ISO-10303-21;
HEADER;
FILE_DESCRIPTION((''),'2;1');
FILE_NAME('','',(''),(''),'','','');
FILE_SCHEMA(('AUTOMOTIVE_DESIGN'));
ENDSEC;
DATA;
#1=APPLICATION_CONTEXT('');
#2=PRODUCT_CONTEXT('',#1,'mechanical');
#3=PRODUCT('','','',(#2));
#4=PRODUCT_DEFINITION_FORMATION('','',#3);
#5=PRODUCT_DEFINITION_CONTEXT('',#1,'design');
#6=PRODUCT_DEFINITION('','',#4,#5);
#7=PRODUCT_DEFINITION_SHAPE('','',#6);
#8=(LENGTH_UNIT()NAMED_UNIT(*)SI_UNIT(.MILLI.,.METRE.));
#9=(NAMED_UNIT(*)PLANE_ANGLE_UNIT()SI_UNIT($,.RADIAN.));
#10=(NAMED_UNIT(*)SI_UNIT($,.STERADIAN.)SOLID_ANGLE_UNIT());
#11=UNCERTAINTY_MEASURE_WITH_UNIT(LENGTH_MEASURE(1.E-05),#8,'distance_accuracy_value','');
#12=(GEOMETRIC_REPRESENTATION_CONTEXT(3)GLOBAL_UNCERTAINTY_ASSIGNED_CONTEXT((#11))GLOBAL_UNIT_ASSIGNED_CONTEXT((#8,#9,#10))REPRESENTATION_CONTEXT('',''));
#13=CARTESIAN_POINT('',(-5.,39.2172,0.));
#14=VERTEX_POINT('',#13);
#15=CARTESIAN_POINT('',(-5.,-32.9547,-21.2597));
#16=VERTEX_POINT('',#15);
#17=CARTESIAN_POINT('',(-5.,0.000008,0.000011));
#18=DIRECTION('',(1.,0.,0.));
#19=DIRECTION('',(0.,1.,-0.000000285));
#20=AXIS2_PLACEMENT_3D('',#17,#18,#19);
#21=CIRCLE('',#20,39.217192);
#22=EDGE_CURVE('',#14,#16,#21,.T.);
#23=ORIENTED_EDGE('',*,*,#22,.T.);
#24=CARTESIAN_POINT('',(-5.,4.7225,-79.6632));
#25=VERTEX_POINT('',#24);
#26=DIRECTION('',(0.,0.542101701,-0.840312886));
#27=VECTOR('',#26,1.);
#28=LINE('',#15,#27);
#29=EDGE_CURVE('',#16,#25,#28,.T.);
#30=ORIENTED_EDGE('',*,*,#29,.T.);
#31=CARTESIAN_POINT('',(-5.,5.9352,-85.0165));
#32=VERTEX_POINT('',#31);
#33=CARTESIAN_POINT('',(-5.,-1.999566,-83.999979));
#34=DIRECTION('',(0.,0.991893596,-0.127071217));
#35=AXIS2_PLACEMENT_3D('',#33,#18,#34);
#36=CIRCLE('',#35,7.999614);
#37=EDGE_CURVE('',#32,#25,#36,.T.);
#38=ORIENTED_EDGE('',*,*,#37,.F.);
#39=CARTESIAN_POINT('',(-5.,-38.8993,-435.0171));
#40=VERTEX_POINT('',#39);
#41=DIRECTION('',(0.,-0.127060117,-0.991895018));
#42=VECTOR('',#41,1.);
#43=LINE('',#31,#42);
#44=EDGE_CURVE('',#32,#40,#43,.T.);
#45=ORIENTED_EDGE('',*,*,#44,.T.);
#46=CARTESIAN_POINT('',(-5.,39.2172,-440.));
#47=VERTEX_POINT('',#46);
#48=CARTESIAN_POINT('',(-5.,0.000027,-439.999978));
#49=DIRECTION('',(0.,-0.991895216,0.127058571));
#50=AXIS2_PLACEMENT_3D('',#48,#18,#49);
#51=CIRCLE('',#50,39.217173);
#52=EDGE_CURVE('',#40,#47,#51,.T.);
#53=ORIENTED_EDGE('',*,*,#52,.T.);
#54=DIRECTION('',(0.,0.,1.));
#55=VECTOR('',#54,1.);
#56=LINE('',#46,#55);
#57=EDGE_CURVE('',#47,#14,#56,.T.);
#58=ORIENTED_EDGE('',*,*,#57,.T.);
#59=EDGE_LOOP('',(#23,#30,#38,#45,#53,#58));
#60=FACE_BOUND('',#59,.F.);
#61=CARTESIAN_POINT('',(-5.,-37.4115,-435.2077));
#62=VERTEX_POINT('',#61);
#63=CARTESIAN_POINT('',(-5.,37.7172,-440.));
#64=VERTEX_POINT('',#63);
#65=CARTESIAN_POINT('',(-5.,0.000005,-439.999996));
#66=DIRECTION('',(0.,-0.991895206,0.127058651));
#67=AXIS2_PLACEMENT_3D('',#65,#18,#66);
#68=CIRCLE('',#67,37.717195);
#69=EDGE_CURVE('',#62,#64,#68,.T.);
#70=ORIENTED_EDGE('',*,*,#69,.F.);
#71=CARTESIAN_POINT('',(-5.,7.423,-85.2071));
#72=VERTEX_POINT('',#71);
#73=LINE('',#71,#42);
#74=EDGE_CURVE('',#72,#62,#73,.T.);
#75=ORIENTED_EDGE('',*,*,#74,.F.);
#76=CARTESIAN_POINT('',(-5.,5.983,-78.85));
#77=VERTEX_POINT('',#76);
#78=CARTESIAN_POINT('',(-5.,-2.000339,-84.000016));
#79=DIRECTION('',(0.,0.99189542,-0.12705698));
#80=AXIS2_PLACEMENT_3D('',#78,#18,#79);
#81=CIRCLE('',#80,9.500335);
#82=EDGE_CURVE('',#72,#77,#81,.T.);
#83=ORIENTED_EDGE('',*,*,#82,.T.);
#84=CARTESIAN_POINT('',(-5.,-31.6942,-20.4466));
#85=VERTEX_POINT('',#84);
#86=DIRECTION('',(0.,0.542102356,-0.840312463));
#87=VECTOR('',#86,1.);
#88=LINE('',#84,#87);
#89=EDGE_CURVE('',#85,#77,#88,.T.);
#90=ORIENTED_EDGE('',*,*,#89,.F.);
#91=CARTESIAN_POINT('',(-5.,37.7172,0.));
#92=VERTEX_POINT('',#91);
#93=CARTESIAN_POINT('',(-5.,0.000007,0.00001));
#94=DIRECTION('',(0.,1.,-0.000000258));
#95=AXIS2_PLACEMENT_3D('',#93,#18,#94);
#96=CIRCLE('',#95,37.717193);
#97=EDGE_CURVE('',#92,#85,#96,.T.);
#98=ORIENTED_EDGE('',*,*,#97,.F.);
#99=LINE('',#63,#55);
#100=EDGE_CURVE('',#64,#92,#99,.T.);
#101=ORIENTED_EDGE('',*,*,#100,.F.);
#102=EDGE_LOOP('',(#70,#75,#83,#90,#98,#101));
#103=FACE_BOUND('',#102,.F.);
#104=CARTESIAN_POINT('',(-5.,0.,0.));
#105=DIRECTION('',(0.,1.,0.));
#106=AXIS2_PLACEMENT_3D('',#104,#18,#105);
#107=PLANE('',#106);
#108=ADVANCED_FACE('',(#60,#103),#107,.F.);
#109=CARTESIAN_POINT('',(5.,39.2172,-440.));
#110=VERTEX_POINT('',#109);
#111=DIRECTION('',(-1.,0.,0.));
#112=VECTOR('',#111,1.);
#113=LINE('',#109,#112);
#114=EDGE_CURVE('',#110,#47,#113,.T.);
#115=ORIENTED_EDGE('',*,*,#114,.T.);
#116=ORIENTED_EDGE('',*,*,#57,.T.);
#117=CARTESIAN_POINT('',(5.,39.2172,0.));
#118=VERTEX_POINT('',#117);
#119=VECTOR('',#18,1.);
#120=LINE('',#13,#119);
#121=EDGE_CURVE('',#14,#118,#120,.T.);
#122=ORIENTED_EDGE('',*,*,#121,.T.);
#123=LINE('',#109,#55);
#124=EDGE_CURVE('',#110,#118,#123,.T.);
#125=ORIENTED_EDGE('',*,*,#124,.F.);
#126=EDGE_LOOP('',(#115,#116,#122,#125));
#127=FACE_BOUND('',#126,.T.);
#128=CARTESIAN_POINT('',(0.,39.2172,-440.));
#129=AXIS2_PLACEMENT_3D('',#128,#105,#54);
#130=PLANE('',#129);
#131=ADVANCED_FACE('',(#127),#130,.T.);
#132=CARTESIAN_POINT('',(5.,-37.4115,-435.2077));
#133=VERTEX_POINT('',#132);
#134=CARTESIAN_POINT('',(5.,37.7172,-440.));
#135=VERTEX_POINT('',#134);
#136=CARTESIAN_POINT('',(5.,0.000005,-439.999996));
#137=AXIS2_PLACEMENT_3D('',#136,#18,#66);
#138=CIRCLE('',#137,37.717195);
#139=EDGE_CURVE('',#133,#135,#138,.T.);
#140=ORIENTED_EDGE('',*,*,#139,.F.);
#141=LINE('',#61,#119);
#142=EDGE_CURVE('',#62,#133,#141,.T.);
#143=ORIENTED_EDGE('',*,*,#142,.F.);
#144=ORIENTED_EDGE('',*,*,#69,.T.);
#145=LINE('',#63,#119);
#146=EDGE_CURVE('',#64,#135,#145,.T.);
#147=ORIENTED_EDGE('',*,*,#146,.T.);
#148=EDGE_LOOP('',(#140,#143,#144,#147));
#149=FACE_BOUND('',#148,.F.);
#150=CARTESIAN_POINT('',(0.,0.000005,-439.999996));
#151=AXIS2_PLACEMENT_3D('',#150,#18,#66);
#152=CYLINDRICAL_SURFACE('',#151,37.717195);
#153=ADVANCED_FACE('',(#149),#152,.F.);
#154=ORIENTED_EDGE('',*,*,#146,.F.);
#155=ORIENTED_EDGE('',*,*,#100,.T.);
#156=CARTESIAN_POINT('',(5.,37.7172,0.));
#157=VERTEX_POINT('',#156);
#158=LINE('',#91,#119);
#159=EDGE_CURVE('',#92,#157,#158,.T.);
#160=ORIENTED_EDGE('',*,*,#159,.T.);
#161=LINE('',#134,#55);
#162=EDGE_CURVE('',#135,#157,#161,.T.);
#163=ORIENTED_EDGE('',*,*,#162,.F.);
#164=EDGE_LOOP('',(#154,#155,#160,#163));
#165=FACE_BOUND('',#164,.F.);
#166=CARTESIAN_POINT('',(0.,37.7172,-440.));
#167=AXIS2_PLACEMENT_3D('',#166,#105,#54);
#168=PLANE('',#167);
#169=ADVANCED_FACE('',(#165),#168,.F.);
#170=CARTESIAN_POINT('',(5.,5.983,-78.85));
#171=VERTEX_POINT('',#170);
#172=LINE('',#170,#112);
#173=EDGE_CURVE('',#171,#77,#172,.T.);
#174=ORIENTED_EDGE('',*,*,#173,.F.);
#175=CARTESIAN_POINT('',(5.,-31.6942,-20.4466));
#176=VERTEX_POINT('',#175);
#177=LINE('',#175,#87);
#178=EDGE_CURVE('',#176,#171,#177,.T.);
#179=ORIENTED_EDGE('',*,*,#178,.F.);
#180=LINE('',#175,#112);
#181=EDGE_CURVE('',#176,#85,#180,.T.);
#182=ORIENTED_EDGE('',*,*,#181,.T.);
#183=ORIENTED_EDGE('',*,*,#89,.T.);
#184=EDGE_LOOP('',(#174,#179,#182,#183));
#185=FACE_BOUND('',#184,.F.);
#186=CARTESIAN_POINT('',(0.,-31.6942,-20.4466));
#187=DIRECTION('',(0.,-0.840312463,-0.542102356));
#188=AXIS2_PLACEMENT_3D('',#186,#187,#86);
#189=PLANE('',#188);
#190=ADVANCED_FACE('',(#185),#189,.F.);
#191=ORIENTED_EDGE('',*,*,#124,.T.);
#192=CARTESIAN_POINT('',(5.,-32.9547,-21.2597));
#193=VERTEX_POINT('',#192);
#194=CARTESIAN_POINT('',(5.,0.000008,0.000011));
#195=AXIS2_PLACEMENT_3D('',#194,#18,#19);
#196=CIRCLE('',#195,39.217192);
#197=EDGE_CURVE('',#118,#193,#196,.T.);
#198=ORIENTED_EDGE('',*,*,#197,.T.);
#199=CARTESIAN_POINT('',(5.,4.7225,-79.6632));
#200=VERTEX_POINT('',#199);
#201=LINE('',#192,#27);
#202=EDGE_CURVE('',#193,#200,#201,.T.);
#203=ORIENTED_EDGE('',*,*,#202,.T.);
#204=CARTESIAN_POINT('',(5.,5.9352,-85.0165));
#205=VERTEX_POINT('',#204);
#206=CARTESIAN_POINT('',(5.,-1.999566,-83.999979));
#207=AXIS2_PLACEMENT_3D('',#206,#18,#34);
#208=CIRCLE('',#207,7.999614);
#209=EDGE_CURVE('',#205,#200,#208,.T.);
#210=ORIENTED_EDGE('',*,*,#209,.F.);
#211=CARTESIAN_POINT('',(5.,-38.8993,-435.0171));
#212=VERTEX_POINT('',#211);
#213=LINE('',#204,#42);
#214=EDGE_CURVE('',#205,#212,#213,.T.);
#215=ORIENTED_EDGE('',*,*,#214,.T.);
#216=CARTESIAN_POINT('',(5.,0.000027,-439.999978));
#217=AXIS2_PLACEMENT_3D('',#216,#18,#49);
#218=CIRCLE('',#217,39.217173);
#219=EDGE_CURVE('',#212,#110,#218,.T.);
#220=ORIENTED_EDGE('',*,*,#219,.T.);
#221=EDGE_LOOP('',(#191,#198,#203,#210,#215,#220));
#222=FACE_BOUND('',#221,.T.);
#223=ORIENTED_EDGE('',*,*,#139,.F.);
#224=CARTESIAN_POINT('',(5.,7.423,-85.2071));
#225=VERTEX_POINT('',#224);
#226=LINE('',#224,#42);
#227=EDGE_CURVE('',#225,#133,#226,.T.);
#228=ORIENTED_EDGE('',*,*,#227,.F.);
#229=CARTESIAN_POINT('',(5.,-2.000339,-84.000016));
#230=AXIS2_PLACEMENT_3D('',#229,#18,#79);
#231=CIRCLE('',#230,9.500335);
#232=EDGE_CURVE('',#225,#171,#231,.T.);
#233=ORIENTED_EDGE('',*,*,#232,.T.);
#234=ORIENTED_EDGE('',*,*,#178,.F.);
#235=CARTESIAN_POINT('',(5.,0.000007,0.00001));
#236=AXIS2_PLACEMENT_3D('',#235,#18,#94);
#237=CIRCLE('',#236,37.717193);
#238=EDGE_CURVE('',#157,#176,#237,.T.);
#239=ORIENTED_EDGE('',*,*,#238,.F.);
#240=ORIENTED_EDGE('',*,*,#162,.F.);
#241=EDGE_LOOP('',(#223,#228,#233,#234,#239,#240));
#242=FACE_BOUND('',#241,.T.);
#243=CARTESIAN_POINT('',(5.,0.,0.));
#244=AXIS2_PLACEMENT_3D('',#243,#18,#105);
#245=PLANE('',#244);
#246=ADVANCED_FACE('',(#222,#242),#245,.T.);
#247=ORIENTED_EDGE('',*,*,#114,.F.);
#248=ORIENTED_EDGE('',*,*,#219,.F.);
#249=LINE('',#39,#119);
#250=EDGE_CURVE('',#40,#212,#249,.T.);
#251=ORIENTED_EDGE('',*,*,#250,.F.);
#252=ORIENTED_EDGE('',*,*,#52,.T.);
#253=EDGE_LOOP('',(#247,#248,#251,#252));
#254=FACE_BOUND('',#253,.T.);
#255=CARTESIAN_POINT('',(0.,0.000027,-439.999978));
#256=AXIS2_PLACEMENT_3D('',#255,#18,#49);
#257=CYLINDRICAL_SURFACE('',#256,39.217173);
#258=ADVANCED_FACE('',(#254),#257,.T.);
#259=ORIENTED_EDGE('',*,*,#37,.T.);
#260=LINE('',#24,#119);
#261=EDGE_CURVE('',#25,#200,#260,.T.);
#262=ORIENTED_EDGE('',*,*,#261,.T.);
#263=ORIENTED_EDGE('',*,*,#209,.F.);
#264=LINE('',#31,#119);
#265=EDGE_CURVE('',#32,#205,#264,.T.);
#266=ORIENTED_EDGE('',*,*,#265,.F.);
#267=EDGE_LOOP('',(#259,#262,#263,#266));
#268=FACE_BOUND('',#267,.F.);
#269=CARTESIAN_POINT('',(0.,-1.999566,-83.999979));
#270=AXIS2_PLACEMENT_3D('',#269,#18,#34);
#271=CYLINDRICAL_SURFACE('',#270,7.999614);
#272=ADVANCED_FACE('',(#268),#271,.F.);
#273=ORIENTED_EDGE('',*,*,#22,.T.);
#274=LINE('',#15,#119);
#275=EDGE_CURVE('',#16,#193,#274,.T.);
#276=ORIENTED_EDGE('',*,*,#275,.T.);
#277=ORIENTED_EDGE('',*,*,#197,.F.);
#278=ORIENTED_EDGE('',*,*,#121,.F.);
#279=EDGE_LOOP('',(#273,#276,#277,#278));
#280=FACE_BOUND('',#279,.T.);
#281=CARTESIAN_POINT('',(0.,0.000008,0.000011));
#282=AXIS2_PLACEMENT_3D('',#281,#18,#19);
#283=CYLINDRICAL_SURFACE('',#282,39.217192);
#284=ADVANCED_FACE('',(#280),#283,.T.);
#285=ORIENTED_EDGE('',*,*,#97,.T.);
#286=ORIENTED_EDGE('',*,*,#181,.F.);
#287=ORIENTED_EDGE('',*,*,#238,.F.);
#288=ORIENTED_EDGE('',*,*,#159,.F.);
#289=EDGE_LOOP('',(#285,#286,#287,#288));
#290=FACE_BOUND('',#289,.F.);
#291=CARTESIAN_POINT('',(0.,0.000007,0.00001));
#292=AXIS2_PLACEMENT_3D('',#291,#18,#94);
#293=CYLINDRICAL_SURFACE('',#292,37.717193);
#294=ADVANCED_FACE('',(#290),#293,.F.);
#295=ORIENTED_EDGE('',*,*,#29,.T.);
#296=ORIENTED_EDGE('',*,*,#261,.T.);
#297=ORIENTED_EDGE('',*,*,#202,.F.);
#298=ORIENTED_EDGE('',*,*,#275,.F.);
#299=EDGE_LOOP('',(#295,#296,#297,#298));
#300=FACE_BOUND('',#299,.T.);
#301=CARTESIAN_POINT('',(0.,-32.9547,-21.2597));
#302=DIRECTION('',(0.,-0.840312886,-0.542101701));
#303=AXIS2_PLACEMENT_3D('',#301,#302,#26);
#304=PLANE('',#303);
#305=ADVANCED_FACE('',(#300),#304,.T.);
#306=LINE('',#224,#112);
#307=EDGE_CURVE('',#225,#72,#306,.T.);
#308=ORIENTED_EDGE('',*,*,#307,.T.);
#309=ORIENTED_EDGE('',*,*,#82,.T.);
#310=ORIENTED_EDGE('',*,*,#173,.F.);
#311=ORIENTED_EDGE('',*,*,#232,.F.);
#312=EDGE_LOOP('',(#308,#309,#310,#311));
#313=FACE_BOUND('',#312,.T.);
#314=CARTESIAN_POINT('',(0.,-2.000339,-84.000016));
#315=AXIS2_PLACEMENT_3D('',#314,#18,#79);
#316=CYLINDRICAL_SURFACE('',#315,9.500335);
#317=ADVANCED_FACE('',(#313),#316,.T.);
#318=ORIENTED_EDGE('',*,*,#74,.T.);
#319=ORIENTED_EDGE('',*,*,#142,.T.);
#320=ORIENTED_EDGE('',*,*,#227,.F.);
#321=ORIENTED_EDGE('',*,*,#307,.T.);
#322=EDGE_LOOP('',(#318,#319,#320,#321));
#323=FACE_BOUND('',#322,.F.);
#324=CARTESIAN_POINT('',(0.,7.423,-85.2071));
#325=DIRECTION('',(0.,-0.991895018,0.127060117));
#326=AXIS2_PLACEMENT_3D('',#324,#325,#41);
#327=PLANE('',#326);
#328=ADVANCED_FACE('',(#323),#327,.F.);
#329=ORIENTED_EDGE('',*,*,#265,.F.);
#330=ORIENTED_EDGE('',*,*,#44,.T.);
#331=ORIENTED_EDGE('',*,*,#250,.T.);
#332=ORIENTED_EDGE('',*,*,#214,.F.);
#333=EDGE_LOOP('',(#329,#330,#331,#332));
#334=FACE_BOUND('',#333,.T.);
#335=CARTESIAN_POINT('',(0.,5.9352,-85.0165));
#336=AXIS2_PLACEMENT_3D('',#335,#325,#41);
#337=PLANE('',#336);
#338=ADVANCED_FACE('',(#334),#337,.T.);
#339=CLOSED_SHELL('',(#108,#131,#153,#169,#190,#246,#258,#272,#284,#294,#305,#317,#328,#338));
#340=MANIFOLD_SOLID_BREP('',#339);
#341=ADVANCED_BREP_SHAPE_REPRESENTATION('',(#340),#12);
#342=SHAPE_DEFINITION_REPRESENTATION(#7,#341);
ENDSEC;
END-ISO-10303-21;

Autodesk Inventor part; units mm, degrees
ref_plane "YZ Plane" through (0, 0, 0) normal (1, 0, 0) x (0, 1, 0)
ref_plane "XZ Plane" through (0, 0, 0) normal (0, 1, 0) x (-1, 0, 0)
ref_plane "XY Plane" through (0, 0, 0) normal (0, 0, 1) x (1, 0, 0)
sketch "スケッチ1" plane through (0, 0, 0) normal (1, 0, 0) x (0, 1, 0)
  arc A0 (38.1972, 0) -> (-32.0976, -20.7068) centre (0, 0) ccw
  arc A1 (-37.8876, -435.1467) -> (38.1972, -440) centre (0, -440) ccw
  arc A2 (6.9469, -85.1461) -> (5.5796, -79.1102) centre (-2, -84) ccw
  line L0 (5.5796, -79.1102) -> (-32.0976, -20.7068)
  line L1 (38.1972, -440) -> (38.1972, 0)
  line L2 (6.9469, -85.1461) -> (-37.8876, -435.1467)
  arc A3 (39.2172, 0) -> (-32.9547, -21.2597) centre (0, 0) ccw
  line L3 (-32.9547, -21.2597) -> (4.7225, -79.6632)
  arc A4 (5.9352, -85.0165) -> (4.7225, -79.6632) centre (-2, -84) ccw
  line L4 (5.9352, -85.0165) -> (-38.8993, -435.0171)
  arc A5 (-38.8993, -435.0171) -> (39.2172, -440) centre (0, -440) ccw
  line L5 (39.2172, -440) -> (39.2172, 0)
  arc A6 (37.7172, 0) -> (-31.6942, -20.4466) centre (0, 0) ccw
  line L6 (-31.6942, -20.4466) -> (5.983, -78.85)
  arc A7 (7.423, -85.2071) -> (5.983, -78.85) centre (-2, -84) ccw
  line L7 (7.423, -85.2071) -> (-37.4115, -435.2077)
  arc A8 (-37.4115, -435.2077) -> (37.7172, -440) centre (0, -440) ccw
  line L8 (37.7172, -440) -> (37.7172, 0)
  dimension "d0" = 76.3944
  dimension "d1" = 76.3944
  dimension "d2" = 440
  dimension "d25" = 8
  dimension "d26" = 84
  dimension "d30" = 2
  dimension "d31" = 1.5
  dimension "d32" = 0.48
extrude "押し出し1" add sketch "スケッチ1" along normal mid plane 10 contours L1 A1 L2 A2 L0 A0 | L5 A5 L4 A4 L3 A3
equation "\"d0\" = d1"
properties part number "belt_1" material "ゴム"
